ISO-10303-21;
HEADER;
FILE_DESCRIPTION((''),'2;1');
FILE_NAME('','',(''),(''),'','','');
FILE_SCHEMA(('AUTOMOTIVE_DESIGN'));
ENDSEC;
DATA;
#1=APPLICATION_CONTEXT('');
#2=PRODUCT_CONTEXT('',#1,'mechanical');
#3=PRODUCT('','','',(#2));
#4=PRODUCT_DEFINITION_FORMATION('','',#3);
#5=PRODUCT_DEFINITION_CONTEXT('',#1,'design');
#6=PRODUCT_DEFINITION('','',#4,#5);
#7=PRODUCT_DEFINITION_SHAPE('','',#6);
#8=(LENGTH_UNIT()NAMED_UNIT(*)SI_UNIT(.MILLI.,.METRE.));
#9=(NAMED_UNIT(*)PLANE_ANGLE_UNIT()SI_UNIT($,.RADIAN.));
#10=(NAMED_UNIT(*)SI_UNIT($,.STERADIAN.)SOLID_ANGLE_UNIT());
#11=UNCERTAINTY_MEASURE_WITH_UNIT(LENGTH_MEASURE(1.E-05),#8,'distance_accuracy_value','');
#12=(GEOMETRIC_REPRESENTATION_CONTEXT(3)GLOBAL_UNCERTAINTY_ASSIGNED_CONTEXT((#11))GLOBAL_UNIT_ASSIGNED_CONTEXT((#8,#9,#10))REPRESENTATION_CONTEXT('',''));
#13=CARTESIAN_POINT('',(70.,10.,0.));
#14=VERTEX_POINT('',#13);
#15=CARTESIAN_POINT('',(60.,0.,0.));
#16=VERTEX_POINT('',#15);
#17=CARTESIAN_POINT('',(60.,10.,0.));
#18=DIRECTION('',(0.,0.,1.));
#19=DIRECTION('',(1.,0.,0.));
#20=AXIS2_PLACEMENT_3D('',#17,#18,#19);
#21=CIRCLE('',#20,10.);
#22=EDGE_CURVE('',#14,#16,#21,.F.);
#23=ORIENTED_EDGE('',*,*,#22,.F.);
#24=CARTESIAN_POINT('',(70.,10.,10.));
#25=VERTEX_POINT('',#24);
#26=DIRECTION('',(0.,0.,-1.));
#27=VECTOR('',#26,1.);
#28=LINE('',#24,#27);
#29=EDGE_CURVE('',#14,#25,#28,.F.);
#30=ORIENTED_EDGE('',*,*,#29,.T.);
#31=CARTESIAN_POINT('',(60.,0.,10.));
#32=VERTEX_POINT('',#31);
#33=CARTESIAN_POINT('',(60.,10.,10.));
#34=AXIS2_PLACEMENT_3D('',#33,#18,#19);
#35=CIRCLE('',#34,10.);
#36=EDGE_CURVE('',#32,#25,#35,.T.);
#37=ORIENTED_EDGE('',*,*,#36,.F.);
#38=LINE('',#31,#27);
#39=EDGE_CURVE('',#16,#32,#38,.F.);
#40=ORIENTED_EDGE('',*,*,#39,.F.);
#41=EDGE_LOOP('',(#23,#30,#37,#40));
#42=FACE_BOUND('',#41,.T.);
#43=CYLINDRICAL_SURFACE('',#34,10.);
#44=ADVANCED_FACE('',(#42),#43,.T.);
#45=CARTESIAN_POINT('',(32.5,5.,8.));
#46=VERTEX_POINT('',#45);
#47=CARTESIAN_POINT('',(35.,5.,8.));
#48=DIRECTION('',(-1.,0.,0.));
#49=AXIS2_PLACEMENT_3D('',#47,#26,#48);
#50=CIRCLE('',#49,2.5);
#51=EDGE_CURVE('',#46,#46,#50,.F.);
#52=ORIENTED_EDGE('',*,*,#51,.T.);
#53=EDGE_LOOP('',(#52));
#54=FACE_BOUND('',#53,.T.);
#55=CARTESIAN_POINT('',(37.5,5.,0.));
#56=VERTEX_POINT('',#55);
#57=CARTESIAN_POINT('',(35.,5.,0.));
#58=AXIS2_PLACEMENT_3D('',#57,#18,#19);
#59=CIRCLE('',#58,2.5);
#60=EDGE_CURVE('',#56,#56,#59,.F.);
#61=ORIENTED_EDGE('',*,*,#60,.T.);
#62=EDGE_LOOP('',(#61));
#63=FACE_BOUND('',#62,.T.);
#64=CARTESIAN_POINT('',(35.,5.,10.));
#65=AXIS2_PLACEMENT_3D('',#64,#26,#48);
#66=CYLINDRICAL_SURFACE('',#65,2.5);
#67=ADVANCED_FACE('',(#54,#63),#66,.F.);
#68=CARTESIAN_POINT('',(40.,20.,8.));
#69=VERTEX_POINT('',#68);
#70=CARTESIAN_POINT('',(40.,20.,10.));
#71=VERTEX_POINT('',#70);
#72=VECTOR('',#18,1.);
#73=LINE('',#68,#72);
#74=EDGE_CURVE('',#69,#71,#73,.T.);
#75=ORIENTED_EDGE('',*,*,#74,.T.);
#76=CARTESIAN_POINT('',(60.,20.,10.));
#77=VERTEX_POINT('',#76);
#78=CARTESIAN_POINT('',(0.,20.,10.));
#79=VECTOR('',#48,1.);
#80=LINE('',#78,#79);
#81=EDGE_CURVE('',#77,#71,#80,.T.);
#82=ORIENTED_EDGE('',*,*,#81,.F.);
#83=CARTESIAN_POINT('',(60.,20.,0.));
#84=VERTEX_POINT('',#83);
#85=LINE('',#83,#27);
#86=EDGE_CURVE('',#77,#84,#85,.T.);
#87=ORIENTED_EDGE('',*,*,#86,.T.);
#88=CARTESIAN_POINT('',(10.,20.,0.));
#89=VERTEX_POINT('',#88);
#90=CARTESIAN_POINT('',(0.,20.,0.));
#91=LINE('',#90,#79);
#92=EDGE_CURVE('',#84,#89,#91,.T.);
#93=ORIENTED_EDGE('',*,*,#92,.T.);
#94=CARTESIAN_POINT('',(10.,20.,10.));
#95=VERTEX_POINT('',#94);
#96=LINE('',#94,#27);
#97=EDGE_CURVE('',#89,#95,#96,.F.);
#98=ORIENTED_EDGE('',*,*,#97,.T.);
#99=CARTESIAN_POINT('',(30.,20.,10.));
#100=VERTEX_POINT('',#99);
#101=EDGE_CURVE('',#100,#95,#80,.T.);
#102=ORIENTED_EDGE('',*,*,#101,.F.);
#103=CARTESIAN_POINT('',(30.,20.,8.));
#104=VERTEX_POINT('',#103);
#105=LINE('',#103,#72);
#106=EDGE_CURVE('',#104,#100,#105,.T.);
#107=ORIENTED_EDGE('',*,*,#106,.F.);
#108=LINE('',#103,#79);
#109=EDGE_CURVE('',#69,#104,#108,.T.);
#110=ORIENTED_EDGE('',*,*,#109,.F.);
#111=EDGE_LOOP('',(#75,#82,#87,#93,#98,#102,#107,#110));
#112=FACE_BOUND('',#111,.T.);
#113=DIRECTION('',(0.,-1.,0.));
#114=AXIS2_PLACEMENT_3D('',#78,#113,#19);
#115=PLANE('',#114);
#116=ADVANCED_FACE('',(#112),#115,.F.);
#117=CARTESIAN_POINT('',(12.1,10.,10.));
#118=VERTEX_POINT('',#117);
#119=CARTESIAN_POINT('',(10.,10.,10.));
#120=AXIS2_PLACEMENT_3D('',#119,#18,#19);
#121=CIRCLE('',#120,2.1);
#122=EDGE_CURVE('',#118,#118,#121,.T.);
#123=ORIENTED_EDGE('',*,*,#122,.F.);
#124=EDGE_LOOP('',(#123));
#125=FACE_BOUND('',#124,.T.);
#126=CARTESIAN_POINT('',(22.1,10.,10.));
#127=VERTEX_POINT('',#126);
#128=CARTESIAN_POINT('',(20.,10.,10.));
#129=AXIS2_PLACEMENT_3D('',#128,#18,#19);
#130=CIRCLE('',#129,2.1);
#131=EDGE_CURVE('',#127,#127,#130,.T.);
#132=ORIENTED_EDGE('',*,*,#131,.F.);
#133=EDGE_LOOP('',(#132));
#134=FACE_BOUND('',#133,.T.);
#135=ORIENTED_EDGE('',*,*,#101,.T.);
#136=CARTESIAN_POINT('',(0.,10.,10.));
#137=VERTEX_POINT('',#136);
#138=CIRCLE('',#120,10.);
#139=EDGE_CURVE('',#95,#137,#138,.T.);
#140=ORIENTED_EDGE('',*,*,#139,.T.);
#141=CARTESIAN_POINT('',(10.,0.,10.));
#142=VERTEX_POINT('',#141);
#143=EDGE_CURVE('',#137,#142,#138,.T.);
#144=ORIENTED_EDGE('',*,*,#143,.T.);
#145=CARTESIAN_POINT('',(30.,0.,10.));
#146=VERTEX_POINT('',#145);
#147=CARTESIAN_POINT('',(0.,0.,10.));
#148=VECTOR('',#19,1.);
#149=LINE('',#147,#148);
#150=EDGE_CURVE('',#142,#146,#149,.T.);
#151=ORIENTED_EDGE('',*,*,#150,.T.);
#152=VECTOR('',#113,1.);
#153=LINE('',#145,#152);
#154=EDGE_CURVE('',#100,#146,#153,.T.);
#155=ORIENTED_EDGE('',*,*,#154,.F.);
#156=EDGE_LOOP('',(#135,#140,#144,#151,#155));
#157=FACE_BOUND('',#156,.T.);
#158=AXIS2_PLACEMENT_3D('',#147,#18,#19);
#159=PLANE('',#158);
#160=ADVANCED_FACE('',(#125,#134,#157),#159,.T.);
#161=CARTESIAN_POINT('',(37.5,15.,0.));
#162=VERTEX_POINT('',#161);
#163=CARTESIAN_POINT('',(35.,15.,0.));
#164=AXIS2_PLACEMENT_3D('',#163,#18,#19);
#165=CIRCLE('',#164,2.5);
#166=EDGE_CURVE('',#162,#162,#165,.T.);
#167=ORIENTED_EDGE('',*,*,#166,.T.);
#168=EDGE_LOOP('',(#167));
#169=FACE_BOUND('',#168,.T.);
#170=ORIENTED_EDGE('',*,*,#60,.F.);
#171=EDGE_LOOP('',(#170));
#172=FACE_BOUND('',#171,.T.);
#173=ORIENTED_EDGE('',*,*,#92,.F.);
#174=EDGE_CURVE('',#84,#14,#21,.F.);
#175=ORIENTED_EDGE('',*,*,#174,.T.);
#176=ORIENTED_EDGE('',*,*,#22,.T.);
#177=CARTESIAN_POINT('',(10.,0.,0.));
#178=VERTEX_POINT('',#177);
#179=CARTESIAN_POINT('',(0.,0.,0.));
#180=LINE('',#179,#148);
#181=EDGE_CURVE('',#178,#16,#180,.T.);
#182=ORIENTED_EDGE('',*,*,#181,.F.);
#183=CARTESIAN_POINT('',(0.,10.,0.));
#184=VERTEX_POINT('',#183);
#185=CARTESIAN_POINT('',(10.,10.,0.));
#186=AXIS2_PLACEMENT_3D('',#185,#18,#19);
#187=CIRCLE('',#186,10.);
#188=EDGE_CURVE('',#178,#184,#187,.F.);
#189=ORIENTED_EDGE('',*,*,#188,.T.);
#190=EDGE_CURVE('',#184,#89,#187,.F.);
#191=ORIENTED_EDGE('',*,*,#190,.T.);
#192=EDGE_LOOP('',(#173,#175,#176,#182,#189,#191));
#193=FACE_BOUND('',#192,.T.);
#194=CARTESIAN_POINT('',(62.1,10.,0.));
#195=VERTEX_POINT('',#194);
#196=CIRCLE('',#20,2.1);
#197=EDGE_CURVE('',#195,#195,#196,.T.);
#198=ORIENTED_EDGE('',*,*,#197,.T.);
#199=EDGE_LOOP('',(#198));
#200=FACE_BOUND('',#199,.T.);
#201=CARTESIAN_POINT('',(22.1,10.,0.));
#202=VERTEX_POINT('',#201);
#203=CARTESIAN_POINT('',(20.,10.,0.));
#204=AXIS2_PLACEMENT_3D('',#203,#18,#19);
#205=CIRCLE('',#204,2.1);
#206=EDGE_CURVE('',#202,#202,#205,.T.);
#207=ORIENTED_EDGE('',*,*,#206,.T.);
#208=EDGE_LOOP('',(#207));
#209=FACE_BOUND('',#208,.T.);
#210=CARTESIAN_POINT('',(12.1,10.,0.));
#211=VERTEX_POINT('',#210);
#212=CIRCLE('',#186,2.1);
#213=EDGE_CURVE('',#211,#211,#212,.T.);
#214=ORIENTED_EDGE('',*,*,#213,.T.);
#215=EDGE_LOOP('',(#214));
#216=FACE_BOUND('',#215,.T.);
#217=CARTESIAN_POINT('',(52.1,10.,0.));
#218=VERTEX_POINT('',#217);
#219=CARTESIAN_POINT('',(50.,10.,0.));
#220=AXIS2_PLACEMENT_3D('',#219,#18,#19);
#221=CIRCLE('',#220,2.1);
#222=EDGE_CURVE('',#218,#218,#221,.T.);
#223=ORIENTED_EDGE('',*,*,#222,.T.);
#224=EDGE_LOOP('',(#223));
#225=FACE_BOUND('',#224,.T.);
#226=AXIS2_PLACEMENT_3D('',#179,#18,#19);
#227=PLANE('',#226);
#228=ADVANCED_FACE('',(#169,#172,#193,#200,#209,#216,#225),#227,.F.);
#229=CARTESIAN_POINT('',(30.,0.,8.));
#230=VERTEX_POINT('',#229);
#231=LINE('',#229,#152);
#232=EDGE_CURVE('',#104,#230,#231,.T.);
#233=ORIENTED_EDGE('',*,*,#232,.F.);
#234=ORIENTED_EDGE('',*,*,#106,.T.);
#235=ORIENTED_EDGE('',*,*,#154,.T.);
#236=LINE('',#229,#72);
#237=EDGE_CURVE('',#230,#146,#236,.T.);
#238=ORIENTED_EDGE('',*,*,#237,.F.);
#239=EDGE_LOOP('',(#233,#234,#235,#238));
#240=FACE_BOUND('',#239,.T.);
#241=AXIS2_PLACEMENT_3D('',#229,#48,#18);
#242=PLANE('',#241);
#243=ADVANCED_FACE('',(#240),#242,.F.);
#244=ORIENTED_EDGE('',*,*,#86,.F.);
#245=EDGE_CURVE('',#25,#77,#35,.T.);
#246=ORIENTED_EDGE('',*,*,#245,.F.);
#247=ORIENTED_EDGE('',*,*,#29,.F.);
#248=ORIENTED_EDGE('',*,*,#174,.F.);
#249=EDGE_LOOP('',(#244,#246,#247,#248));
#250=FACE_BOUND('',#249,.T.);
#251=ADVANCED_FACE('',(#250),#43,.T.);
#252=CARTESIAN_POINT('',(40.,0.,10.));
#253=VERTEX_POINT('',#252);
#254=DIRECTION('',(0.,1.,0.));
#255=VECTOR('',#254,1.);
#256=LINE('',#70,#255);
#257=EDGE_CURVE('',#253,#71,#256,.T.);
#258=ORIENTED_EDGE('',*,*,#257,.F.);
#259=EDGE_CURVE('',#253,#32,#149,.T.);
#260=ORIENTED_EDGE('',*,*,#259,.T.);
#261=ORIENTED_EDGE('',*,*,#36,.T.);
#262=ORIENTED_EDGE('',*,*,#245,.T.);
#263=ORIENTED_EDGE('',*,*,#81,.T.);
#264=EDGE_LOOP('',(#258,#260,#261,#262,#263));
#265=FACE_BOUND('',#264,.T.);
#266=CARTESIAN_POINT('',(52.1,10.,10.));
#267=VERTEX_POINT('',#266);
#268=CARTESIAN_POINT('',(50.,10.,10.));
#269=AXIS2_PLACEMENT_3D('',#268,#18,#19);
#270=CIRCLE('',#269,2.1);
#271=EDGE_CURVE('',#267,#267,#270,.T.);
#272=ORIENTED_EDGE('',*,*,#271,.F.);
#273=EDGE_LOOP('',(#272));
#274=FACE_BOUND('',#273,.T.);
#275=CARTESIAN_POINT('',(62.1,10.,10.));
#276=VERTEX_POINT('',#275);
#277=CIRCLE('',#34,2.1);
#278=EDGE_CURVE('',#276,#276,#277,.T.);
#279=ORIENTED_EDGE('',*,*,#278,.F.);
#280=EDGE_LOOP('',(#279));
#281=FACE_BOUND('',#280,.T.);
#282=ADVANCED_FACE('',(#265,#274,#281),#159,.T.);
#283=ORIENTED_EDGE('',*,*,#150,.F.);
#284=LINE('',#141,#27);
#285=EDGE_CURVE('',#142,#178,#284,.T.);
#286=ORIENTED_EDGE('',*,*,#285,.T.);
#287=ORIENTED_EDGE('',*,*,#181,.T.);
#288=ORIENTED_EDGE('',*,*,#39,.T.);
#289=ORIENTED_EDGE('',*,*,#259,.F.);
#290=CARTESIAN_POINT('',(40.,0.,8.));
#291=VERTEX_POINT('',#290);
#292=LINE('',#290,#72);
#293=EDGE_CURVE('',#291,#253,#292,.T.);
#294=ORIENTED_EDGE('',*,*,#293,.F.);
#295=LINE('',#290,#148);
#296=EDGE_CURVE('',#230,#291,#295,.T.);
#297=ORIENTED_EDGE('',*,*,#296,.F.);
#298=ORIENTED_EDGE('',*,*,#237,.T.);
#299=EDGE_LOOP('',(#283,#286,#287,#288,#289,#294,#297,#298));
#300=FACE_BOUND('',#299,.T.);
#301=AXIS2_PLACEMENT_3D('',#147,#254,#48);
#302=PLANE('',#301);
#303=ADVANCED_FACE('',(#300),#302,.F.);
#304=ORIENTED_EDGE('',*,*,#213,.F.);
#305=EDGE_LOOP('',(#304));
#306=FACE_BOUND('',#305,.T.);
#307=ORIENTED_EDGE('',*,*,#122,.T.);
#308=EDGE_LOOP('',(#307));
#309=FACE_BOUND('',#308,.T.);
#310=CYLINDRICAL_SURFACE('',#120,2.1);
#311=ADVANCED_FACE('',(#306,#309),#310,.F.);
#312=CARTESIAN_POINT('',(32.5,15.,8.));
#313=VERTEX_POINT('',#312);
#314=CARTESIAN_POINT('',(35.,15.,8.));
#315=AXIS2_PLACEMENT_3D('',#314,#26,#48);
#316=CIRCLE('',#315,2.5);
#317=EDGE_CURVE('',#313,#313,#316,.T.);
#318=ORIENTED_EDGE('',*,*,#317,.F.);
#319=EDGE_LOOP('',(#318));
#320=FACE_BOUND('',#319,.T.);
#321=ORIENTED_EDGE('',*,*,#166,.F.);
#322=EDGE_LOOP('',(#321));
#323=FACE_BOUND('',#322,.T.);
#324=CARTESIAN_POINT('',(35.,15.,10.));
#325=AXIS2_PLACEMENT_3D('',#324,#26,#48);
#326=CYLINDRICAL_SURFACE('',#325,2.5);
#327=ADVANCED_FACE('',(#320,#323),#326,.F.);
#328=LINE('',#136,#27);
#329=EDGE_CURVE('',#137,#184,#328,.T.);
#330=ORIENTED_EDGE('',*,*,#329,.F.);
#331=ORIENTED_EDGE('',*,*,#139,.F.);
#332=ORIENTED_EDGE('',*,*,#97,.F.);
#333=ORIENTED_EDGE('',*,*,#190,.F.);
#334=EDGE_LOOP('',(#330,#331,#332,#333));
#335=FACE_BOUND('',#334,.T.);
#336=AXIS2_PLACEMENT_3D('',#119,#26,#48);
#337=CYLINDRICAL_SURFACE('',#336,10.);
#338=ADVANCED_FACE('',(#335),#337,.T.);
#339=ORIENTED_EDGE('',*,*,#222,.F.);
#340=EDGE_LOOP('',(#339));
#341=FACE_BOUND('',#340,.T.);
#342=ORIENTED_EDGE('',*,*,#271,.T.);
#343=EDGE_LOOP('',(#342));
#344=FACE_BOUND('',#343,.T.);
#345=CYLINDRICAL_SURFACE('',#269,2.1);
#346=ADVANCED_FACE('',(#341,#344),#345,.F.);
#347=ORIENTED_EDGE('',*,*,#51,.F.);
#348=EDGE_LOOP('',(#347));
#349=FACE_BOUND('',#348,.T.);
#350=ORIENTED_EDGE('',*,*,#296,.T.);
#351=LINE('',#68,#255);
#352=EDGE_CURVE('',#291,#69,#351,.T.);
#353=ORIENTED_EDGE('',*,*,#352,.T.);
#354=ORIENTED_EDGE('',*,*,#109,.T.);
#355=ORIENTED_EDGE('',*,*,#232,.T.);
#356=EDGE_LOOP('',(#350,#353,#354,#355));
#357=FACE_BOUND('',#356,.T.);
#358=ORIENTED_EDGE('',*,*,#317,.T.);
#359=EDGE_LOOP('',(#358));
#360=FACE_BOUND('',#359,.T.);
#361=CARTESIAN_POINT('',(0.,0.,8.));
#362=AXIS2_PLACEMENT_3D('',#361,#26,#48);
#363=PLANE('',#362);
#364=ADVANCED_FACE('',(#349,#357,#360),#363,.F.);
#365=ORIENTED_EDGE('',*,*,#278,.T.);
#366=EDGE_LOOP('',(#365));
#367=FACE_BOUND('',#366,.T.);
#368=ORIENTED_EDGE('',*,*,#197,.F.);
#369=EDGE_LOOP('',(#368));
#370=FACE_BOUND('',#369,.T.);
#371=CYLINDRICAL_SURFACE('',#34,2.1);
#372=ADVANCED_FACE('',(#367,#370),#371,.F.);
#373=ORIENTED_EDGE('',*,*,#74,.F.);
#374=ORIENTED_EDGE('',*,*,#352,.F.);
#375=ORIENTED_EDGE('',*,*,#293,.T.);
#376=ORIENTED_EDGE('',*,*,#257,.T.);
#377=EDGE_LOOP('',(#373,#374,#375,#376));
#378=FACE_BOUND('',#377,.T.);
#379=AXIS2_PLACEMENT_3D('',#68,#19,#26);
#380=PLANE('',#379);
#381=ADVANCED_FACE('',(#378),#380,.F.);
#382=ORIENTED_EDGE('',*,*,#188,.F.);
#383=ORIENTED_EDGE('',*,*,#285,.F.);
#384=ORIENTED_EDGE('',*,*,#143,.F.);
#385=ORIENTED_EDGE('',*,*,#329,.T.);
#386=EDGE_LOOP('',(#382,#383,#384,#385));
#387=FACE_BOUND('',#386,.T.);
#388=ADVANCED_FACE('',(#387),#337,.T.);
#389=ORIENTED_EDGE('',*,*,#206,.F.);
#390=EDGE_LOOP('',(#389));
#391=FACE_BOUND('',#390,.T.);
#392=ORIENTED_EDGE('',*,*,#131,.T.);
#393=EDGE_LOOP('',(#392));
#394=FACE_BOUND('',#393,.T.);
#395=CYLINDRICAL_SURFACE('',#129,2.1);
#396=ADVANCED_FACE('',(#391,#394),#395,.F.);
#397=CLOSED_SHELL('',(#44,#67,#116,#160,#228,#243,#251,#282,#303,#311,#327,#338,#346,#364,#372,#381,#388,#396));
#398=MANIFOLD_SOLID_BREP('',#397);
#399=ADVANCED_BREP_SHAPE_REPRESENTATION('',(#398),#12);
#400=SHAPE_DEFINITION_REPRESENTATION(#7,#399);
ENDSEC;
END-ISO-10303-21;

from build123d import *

# Parameters (mm, degrees)
ESQUISSE1_R             = 2.5
BOSS_EXTRU_1_DEPTH      = 10
CONG_1_R                = 10
TROU_TARAUD_M5X0_81_D   = 4.2
ESQUISSE5_W             = 10
ESQUISSE5_H             = 20
ENL_V_MAT_EXTRU_1_DEPTH = 2


with BuildPart() as part:
    # Esquisse1 → Boss.-Extru.1 (new body)
    with BuildSketch(Plane.XY):
        Polygon((50, 20), (0, 20), (0, 0), (50, 0), (60, 0), (70, 0), (70, 20), (60, 20), align=None)
        with Locations((35, 5)):
            Circle(ESQUISSE1_R, mode=Mode.SUBTRACT)
        with Locations((35, 15)):
            Circle(ESQUISSE1_R, mode=Mode.SUBTRACT)
    extrude(amount=BOSS_EXTRU_1_DEPTH)

    # Congé1
    cong_1_edges = [part.edges().sort_by_distance(p)[0] for p in [
        (0, 0, 5),
        (0, 20, 5),
        (70, 0, 5),
        (70, 20, 5),
    ]]
    fillet(cong_1_edges, radius=CONG_1_R - 0.0001)  # a hair under: the kernel refuses the full size

    # Trou taraudé M5x0.81 (through all)
    with Locations(Plane.XY.offset(10)):
        with Locations((50, 10), (60, 10), (10, 10), (20, 10)):
            Hole(TROU_TARAUD_M5X0_81_D / 2)

    # Esquisse5 → Enlèv. mat.-Extru.1 (cut)
    with BuildSketch(Plane.XY.offset(10)):
        with Locations((35, 10)):
            Rectangle(ESQUISSE5_W, ESQUISSE5_H)
    extrude(amount=-ENL_V_MAT_EXTRU_1_DEPTH, mode=Mode.SUBTRACT)


solid = part.part
